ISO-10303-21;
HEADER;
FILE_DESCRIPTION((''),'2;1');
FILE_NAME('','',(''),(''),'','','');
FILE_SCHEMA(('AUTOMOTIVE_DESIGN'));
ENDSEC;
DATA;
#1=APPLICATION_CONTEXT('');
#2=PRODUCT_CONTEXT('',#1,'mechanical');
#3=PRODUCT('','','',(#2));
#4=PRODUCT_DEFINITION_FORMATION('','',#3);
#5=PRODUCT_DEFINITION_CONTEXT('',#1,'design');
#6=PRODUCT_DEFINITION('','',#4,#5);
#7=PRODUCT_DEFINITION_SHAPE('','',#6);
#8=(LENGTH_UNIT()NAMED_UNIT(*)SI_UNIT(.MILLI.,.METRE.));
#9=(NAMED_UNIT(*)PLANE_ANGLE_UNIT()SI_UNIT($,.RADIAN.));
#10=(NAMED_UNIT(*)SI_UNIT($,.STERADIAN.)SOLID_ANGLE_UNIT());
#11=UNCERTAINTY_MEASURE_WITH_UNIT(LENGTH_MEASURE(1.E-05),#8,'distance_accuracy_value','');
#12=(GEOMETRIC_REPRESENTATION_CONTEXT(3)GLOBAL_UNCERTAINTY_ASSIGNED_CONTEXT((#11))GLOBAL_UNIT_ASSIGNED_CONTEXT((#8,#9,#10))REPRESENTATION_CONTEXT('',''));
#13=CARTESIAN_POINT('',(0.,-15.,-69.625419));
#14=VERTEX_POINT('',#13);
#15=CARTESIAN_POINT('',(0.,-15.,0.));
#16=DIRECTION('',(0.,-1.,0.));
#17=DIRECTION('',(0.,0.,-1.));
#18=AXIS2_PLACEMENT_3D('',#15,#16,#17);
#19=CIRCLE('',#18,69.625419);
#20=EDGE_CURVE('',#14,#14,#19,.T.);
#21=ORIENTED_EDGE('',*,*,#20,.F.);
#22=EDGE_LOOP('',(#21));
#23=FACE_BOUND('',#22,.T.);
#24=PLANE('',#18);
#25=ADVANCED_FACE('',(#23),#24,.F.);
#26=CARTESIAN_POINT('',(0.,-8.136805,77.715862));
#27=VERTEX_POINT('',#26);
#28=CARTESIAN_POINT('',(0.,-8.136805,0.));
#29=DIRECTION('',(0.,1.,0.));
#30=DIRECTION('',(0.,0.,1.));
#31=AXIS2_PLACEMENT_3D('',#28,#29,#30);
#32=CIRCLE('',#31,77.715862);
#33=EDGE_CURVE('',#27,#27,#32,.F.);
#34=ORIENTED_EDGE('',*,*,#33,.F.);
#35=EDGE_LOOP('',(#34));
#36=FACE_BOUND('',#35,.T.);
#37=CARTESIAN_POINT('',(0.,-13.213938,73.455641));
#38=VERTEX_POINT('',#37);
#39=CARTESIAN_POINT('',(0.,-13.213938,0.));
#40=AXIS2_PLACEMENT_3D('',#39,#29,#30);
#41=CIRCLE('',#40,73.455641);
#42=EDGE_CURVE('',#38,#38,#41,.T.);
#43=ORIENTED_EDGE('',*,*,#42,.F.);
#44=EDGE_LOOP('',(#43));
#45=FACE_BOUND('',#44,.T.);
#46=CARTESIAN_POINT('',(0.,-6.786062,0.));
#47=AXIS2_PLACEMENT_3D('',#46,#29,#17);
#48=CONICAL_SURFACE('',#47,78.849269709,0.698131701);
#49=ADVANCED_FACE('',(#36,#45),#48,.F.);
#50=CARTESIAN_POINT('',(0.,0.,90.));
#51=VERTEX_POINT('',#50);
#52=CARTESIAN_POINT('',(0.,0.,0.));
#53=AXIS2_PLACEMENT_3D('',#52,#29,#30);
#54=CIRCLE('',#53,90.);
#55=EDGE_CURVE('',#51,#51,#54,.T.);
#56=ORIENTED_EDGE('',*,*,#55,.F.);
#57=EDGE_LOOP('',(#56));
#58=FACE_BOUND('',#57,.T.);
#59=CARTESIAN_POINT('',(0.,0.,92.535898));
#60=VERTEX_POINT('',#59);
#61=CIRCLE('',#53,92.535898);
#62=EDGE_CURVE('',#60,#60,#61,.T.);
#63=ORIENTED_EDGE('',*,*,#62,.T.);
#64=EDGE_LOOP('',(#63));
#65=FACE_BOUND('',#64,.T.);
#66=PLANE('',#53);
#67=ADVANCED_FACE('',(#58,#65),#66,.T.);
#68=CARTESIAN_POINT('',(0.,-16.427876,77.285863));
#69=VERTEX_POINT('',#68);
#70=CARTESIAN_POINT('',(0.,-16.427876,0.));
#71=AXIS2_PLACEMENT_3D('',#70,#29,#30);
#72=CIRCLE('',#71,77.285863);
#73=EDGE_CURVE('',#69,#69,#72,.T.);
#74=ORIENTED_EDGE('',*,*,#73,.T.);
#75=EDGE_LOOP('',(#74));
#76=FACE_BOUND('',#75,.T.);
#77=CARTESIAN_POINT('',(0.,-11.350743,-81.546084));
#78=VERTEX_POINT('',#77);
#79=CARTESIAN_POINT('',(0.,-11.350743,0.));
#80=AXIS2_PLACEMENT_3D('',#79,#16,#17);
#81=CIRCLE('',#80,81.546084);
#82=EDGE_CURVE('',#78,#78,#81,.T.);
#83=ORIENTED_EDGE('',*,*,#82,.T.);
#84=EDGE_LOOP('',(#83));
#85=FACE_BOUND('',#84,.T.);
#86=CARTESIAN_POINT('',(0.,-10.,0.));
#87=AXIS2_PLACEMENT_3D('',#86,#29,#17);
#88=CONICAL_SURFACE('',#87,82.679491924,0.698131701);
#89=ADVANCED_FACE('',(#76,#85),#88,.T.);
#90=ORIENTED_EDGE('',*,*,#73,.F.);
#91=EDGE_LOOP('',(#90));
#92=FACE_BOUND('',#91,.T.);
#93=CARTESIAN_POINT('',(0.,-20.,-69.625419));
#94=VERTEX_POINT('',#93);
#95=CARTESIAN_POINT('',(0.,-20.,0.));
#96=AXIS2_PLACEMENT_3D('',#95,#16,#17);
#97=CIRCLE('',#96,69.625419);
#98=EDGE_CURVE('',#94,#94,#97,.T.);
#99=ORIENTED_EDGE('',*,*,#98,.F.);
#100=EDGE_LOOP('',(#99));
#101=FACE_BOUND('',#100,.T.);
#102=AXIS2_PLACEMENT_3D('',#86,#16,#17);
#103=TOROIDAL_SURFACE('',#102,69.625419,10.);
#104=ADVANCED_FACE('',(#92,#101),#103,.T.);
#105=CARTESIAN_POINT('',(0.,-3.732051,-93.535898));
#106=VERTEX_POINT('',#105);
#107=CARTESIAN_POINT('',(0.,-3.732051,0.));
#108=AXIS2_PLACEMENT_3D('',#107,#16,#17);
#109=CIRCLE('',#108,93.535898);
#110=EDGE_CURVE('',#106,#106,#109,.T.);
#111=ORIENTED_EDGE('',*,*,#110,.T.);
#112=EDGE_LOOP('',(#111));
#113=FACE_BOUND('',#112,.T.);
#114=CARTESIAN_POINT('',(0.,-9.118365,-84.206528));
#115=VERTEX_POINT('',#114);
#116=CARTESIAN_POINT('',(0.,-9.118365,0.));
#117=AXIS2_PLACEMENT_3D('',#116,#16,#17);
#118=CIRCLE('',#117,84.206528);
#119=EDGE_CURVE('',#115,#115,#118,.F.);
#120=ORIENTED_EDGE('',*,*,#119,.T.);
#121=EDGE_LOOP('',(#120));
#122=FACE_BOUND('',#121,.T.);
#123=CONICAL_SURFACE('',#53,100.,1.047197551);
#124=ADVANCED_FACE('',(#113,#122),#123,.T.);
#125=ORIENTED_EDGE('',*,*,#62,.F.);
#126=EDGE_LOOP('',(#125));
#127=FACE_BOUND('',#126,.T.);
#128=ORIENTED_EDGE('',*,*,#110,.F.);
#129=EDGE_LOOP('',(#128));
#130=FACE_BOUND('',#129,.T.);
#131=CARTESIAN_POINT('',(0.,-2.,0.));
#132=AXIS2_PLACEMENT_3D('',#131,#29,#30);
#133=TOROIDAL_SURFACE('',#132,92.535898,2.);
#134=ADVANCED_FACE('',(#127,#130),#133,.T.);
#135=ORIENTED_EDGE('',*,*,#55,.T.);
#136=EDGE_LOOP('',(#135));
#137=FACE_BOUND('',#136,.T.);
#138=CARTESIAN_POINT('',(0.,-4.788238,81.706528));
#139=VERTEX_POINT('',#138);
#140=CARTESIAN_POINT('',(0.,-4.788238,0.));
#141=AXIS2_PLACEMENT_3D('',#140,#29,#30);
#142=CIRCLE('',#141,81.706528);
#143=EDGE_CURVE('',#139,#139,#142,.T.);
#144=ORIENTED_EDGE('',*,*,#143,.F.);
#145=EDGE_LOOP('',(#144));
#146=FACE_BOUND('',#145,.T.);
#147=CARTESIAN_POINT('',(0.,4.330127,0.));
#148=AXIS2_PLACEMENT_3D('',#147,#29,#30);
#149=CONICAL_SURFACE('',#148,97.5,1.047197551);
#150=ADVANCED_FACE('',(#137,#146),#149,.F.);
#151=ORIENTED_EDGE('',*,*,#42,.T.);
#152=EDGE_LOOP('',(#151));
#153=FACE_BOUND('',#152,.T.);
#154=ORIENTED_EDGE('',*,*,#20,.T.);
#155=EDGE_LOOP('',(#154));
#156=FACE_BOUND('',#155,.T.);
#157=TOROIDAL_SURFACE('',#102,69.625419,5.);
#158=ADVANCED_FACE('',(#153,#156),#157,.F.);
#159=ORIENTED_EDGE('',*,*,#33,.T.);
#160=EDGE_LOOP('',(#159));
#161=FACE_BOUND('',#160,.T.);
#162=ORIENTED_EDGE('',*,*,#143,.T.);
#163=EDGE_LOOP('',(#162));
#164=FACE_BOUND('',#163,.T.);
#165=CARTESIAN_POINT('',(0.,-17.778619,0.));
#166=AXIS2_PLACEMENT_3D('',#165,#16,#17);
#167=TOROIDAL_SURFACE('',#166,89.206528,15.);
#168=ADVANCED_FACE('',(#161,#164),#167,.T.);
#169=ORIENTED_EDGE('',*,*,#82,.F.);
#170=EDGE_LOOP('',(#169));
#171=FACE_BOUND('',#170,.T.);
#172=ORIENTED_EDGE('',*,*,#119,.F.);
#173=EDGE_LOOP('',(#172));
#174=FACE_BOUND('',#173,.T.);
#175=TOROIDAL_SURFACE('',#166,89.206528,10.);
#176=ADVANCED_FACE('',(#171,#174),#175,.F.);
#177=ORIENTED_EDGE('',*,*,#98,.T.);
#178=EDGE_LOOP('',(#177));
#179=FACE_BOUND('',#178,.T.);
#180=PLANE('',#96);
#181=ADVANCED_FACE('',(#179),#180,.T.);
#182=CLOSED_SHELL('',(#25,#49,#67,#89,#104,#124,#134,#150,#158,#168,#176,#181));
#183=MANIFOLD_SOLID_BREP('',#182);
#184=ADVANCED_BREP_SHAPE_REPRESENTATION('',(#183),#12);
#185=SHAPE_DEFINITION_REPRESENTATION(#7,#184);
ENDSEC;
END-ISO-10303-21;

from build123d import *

# Parameters (mm, degrees)
SKETCH1_R           = 100
BOSS_EXTRUDE1_DEPTH = 10
BOSS_EXTRUDE1_DRAFT = -60
SKETCH2_R           = 82.679491924
BOSS_EXTRUDE2_DEPTH = 10
BOSS_EXTRUDE2_TAPER = 40
FILLET1_R           = 10
FILLET2_R           = 2


# Read off the part's stored shape, not the designer's step: Shell2
with BuildPart() as part:
    # Sketch1 → Boss-Extrude1 (with draft: the straight prism first)
    with BuildSketch(Plane(origin=(0, 0, 0), x_dir=(1, 0, 0), z_dir=(0, 1, 0))):
        Circle(SKETCH1_R)
    extrude(amount=-BOSS_EXTRUDE1_DEPTH)
    # Boss-Extrude1: the draft: its side faces are tilted about the plane it starts from
    boss_extrude1_sides = [part.faces().sort_by_distance(p)[0] for p in [
        (-100, -5, 0),
    ]]
    draft(boss_extrude1_sides, Plane(origin=(0, 0, 0), x_dir=(1, 0, 0), z_dir=(0, 1, 0)), BOSS_EXTRUDE1_DRAFT)

    # Sketch2 → Boss-Extrude2 (add)
    with BuildSketch(Plane.XZ.offset(10)):
        Circle(SKETCH2_R)
    extrude(amount=BOSS_EXTRUDE2_DEPTH, taper=BOSS_EXTRUDE2_TAPER)

    # Fillet1
    fillet1_edges = [part.edges().sort_by_distance(p)[0] for p in [
        (-82.679491924, -10, 0),
        (-74.288495613, -20, 0),
    ]]
    fillet(fillet1_edges, radius=FILLET1_R)

    # Fillet2
    fillet2_edges = [part.edges().sort_by_distance(p)[0] for p in [
        (-100, 0, 0),
    ]]
    fillet(fillet2_edges, radius=FILLET2_R)

    # Shell2 outline → Shell2 (revolve, cut)
    with BuildSketch(Plane.XY):
        with BuildLine():
            ThreePointArc((77.715861724, -8.136804989), (79.564714226, -6.287952488), (81.706528371, -4.788238078))
            Line((81.706528371, -4.788238078), (90, 0))
            Line((90, 0), (0, 0))
            Line((0, 0), (0, -15))
            Line((0, -15), (69.625419031, -15))
            ThreePointArc((69.625419031, -15), (71.73851034, -14.531538935), (73.455641247, -13.213938048))
            Line((73.455641247, -13.213938048), (77.715861724, -8.136804989))
        make_face()
    revolve(axis=Axis((0, 0, 0), (0, 1, 0)), mode=Mode.SUBTRACT)


solid = part.part
